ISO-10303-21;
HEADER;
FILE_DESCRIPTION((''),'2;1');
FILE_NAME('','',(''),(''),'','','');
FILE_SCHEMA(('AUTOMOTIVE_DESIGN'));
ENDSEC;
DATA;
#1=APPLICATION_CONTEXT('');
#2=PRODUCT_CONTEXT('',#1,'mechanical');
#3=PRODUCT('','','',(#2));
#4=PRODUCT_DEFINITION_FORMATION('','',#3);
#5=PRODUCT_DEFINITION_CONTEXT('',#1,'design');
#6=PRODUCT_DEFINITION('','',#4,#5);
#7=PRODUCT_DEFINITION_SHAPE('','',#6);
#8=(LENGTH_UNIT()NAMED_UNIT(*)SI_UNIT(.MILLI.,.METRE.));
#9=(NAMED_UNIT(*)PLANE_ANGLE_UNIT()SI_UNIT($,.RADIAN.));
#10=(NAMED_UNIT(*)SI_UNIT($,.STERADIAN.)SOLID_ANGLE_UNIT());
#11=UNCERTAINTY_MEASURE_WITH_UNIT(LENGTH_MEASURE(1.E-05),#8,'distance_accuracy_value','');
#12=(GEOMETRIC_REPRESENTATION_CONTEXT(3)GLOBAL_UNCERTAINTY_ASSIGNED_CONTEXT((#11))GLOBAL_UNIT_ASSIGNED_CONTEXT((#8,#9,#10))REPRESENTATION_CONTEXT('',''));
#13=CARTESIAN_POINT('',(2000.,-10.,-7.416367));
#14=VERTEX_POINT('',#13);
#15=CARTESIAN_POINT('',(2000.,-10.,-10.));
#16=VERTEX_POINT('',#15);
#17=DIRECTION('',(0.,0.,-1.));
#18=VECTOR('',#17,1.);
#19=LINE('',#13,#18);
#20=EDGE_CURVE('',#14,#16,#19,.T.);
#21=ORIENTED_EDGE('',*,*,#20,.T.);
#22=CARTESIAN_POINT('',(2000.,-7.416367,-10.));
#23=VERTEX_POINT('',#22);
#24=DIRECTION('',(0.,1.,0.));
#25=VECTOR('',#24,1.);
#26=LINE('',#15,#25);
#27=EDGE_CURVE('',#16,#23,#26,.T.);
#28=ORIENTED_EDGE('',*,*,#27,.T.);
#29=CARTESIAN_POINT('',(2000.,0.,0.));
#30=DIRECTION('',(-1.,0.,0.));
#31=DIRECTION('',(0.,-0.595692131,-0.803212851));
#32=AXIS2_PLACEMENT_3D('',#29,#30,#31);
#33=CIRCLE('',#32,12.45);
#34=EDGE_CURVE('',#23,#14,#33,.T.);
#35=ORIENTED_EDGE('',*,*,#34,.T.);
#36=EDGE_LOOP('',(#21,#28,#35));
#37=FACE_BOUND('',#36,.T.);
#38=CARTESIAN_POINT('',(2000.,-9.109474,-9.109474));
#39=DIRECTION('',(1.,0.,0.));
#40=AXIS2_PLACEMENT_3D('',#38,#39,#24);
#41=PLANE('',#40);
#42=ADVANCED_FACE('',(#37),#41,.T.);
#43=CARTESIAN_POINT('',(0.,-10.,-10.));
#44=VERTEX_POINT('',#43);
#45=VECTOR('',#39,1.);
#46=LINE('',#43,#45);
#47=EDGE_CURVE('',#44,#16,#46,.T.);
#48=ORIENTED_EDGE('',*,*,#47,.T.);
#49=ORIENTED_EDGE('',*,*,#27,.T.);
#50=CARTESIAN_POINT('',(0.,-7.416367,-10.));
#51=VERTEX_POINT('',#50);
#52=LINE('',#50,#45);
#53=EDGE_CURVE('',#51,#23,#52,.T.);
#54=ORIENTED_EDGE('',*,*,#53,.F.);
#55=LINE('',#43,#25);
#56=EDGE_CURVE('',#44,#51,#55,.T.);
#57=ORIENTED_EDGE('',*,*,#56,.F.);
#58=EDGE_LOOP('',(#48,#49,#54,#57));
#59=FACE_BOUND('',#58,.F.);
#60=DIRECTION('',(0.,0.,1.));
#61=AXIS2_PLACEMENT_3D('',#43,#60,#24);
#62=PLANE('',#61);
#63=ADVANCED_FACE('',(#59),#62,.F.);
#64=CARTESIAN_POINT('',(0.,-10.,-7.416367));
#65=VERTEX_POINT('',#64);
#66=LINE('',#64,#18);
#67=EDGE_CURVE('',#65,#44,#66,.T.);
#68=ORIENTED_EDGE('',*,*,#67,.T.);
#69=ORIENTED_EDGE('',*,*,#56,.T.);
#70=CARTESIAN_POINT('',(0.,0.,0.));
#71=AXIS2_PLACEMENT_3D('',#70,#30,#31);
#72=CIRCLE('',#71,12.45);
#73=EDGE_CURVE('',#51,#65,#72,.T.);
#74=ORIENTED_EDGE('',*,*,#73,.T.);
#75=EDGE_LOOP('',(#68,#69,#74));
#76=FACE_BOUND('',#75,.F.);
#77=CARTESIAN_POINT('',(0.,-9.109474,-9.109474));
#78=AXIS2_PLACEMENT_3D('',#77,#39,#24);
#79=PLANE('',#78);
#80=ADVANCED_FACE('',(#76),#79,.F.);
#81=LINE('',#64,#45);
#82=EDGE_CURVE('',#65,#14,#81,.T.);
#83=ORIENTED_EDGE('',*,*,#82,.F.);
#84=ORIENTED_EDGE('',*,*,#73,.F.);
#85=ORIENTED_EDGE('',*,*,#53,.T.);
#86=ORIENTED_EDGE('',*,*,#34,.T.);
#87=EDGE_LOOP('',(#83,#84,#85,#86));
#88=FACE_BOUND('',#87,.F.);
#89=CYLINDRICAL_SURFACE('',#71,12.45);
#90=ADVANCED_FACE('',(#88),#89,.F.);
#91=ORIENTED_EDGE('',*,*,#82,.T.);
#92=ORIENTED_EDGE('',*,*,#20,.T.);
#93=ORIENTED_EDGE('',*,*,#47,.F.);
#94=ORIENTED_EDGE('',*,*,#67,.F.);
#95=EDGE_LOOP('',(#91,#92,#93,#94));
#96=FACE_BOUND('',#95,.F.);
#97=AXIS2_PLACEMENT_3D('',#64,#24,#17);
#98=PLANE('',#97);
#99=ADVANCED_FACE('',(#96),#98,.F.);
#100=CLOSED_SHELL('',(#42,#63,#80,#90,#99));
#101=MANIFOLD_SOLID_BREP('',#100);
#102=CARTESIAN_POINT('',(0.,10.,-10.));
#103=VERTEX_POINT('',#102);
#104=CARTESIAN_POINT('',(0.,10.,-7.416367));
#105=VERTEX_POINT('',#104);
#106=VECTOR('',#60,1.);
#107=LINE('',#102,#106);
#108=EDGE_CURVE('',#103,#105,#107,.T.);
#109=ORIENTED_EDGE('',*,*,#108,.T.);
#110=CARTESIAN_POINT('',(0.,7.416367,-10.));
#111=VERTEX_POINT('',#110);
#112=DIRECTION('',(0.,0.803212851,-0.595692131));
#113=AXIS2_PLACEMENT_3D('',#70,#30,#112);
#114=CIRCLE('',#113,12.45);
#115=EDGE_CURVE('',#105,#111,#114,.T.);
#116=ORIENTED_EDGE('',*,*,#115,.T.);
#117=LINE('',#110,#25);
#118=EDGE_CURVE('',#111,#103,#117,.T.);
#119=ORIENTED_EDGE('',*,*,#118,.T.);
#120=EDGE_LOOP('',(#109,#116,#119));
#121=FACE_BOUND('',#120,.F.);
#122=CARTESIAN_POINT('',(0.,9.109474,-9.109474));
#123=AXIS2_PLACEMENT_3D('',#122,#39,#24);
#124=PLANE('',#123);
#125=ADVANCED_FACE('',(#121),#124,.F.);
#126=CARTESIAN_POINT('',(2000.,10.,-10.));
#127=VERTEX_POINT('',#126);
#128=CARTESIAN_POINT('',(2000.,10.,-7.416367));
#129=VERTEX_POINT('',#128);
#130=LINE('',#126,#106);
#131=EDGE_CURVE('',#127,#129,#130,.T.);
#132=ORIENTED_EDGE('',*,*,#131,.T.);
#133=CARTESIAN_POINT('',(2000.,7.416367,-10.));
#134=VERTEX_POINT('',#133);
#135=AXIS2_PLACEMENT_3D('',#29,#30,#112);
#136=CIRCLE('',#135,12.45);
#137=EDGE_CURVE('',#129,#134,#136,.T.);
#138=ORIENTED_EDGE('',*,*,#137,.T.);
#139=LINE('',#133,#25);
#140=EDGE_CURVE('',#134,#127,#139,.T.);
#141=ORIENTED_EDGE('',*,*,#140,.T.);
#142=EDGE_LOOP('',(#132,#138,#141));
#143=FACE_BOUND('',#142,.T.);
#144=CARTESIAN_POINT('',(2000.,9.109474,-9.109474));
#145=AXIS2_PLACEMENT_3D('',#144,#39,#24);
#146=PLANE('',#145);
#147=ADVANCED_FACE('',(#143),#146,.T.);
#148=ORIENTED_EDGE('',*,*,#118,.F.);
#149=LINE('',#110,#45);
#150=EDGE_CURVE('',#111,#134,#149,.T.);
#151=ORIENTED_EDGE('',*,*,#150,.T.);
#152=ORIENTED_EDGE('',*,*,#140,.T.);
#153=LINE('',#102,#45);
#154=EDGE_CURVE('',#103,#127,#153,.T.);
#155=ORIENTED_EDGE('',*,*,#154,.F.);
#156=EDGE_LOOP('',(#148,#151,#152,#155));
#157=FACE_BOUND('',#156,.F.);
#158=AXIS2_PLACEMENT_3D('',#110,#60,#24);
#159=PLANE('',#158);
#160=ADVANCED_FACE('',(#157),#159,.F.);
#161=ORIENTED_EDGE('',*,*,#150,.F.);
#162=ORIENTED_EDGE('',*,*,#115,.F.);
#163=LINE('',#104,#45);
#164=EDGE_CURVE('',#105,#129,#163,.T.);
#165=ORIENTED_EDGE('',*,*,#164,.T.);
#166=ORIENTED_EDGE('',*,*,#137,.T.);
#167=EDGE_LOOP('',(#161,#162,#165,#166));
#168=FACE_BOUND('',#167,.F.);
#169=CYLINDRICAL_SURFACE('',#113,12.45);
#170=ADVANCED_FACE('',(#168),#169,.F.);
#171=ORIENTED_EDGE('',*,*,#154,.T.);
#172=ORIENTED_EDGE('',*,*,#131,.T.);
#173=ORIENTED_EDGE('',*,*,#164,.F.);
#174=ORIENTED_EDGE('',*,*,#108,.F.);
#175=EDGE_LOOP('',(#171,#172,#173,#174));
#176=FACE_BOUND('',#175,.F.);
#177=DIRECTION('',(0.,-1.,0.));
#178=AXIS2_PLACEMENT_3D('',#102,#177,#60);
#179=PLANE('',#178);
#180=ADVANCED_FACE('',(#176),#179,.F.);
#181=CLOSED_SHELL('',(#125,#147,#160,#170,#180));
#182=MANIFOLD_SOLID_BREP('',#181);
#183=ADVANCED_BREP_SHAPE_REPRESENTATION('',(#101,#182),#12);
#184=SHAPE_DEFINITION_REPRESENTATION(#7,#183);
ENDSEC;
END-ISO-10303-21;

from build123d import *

# Parameters (mm, degrees)
F2_DEPTH = 2000


with BuildPart() as f2:
    # F1 (on Right) → F2 (new body)
    with BuildSketch(Plane.YZ):
        with BuildLine():
            Line((-10, -7.4163670351), (-10, -10))
            Line((-10, -10), (-7.4163670351, -10))
            ThreePointArc((-7.4163670351, -10), (-8.8034794258, -8.8034794258), (-10, -7.4163670351))
        make_face()
    extrude(amount=F2_DEPTH)


with BuildPart() as f2b:
    # F1 (on Right) → F2, piece 2 (new body)
    with BuildSketch(Plane.YZ):
        with BuildLine():
            ThreePointArc((10, -7.4163670351), (8.8034794258, -8.8034794258), (7.4163670351, -10))
            Line((7.4163670351, -10), (10, -10))
            Line((10, -10), (10, -7.4163670351))
        make_face()
    extrude(amount=F2_DEPTH)


solid = Compound([f2.part, f2b.part])
